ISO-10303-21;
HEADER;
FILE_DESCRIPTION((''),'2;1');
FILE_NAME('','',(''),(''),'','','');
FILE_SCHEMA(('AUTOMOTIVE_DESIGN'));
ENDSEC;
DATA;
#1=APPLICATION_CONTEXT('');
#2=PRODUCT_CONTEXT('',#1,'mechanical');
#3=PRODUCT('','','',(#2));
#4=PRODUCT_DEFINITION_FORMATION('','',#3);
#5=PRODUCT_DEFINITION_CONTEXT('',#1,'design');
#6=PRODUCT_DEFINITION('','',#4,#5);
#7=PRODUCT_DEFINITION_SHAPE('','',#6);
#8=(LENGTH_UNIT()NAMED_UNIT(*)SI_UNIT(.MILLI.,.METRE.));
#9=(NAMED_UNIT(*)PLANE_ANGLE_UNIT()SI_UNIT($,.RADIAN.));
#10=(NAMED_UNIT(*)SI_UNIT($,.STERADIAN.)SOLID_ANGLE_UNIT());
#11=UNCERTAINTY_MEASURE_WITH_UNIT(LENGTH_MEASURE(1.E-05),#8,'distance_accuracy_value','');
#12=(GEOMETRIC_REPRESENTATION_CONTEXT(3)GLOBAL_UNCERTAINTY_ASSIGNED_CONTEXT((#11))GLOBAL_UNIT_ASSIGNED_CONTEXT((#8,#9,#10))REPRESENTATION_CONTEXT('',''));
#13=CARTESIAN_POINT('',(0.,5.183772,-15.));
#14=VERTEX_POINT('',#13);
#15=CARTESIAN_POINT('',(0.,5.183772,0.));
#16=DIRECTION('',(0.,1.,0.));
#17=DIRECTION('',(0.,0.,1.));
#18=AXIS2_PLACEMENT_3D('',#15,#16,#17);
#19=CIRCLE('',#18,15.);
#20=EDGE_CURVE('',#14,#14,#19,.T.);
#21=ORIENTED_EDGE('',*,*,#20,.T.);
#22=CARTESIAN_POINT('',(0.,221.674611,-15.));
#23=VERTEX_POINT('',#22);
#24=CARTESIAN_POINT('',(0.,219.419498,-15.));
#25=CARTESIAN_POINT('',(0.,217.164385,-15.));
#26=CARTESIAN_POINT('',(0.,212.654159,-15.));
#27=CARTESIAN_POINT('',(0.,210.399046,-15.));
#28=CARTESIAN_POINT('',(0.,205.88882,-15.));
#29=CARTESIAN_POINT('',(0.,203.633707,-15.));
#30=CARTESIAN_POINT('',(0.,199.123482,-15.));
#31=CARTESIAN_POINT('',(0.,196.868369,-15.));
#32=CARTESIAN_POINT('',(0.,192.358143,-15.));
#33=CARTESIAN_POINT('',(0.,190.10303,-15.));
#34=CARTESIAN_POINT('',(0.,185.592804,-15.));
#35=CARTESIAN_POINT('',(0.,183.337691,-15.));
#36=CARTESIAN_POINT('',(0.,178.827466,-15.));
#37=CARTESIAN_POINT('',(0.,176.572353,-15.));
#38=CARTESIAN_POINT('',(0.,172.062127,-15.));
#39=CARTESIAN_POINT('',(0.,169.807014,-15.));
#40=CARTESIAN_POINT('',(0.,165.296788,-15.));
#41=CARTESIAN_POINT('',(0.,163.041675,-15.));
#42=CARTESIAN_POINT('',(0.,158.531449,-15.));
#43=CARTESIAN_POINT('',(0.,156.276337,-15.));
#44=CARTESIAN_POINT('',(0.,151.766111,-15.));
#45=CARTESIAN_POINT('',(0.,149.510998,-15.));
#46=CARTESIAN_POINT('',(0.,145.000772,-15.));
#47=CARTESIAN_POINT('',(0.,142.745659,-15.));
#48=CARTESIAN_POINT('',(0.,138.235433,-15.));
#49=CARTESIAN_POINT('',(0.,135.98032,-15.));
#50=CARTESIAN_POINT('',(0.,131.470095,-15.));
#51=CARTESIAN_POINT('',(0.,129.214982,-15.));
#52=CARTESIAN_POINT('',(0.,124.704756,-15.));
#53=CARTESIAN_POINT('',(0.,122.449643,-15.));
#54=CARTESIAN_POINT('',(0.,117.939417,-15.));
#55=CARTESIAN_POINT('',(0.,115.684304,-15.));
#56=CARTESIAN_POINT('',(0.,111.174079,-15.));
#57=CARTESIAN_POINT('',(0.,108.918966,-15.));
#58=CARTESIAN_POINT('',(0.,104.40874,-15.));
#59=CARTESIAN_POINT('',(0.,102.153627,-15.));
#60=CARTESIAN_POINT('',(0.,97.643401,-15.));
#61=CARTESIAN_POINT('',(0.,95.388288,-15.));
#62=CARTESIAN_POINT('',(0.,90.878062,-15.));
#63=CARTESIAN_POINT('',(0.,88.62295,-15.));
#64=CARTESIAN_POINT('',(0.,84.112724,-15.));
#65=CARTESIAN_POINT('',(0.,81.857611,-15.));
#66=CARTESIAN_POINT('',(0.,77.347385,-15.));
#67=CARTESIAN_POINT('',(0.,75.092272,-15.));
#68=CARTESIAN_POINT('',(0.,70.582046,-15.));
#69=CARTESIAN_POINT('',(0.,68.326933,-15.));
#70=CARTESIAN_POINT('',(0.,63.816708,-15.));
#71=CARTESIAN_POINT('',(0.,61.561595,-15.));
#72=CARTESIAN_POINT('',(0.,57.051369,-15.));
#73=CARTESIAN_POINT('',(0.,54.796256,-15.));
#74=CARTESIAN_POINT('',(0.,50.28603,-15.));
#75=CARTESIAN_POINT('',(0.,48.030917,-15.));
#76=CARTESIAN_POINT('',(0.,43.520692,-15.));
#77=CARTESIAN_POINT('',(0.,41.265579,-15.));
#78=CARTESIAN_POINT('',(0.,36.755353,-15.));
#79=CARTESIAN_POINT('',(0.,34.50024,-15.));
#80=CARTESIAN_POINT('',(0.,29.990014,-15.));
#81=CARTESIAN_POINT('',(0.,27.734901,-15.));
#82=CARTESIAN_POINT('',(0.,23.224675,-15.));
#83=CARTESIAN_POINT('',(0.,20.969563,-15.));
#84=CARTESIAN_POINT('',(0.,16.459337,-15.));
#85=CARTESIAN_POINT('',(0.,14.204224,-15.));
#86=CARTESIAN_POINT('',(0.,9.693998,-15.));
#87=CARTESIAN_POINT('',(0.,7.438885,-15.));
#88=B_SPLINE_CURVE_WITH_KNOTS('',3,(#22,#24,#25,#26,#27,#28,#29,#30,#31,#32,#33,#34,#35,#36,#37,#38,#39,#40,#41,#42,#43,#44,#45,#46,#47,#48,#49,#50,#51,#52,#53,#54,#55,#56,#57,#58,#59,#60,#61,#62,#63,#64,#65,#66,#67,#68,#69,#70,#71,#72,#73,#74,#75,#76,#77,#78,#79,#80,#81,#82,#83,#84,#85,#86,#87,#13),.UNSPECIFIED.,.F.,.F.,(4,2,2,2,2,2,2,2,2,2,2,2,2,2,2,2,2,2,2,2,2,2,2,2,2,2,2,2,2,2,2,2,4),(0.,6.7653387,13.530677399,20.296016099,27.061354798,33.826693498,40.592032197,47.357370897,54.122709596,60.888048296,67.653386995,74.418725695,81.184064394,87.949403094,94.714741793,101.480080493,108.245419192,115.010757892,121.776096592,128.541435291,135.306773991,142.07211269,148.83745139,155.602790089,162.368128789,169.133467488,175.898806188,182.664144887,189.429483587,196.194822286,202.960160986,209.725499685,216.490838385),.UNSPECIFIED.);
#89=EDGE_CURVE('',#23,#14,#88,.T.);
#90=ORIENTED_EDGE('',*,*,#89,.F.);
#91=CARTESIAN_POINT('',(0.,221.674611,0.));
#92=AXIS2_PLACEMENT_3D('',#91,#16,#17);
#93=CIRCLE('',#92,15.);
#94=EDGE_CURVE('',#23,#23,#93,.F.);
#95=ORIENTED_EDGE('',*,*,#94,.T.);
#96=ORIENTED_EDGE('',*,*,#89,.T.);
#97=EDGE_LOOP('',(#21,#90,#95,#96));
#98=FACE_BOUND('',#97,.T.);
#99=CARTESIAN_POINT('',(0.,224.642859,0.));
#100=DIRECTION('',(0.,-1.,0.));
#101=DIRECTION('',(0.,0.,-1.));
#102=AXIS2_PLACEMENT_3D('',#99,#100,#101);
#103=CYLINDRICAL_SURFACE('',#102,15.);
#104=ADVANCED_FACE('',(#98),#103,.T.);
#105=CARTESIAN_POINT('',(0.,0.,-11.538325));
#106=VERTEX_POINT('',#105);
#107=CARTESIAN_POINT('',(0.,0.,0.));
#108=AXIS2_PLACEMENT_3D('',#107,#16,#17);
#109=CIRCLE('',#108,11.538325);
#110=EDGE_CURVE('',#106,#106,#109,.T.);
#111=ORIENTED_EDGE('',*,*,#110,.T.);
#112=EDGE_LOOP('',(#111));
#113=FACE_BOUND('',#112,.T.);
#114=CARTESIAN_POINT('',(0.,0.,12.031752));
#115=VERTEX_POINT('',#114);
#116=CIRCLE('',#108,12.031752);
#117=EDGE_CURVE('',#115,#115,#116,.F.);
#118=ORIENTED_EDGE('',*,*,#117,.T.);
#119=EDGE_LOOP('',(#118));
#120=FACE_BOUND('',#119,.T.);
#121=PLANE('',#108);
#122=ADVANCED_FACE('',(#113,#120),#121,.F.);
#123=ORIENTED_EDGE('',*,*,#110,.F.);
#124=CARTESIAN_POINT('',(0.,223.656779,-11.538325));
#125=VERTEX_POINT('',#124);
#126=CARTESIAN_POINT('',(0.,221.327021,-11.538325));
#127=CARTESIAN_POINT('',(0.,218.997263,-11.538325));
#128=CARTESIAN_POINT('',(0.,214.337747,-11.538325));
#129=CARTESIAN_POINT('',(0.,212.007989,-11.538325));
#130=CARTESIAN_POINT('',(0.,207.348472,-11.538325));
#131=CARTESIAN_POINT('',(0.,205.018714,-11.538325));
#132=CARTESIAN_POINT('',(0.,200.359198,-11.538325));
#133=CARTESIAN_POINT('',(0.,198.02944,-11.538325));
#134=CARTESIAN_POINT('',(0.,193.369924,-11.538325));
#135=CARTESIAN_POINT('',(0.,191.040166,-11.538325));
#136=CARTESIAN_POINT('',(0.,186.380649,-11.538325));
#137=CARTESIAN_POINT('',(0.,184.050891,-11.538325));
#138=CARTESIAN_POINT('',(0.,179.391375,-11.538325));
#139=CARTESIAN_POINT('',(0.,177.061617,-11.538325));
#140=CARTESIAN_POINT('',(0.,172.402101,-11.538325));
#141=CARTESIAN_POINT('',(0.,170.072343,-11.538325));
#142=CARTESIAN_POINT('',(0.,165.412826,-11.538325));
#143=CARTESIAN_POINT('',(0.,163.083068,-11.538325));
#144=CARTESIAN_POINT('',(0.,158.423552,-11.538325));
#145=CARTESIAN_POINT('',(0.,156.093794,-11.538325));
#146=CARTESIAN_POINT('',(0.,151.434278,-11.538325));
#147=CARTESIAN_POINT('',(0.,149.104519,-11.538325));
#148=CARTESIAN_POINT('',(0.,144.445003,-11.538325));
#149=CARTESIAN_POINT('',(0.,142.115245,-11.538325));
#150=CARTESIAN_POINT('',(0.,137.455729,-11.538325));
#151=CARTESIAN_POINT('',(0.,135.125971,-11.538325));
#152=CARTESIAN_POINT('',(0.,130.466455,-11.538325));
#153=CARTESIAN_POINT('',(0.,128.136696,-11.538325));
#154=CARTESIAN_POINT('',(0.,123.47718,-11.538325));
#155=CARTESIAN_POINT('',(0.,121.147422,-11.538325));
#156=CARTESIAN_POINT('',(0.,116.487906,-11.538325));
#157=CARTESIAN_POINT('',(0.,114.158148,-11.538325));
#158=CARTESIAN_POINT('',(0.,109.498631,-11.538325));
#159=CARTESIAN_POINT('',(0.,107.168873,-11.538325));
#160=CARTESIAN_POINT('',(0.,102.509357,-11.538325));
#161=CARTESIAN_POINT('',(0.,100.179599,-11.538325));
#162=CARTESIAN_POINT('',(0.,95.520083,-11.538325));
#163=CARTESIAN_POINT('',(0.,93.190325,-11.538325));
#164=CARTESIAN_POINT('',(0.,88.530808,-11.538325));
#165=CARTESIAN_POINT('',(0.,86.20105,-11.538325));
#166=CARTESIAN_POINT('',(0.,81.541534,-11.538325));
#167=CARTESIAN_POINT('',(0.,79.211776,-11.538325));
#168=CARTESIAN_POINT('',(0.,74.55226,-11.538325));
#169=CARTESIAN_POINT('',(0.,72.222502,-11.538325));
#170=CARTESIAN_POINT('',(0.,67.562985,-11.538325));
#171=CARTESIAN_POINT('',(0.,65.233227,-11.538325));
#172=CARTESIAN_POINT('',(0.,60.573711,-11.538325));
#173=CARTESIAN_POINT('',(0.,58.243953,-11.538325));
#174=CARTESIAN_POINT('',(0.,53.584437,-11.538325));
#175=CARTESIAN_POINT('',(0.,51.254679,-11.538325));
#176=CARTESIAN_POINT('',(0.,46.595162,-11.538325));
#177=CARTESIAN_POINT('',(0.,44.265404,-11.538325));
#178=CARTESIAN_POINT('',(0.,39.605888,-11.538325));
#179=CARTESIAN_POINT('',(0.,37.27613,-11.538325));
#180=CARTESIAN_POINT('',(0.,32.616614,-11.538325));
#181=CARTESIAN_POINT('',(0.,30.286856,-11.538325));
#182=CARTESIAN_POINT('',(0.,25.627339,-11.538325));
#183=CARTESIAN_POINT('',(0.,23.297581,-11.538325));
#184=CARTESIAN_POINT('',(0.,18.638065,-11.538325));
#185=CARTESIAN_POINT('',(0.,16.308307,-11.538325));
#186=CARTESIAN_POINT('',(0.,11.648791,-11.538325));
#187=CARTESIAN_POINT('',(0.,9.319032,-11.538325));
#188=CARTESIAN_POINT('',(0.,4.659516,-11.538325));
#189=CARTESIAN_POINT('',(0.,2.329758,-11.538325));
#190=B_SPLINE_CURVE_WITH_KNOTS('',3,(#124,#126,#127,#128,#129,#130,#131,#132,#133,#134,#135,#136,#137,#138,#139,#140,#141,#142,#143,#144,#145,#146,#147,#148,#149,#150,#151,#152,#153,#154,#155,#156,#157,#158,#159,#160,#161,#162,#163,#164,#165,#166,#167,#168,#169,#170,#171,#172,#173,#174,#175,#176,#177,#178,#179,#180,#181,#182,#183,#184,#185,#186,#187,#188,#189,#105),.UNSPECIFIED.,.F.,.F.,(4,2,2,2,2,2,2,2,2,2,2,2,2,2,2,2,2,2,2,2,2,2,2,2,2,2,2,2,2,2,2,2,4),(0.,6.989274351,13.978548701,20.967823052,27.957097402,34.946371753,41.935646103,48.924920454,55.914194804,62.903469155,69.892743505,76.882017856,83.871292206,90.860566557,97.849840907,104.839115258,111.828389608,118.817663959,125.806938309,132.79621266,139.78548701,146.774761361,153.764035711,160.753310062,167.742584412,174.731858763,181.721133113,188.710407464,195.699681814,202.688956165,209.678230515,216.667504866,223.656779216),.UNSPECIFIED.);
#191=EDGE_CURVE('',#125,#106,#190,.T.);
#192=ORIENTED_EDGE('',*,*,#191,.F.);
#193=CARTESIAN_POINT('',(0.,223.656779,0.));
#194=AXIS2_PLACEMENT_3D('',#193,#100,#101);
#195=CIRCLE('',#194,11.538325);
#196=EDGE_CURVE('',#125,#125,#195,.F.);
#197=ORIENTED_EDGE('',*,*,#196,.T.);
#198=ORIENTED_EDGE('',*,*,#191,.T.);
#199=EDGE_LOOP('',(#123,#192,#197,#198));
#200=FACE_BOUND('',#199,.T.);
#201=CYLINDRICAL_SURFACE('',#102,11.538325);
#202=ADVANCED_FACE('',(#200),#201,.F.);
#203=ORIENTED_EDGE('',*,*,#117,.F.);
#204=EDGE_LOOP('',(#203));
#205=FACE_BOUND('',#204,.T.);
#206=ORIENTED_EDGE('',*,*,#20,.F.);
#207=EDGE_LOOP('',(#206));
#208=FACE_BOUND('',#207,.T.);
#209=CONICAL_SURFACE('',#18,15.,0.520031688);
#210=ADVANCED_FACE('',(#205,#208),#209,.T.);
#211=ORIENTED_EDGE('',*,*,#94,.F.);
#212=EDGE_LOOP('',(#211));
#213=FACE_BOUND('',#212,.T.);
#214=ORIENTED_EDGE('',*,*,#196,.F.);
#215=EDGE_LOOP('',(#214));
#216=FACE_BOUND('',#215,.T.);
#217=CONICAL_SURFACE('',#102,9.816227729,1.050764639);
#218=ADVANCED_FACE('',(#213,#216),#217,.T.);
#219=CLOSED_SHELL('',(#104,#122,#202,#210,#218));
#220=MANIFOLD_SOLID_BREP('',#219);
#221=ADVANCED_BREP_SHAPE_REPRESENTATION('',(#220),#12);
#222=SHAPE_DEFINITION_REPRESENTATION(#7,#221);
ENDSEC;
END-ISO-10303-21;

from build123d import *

# Parameters (mm, degrees)
SKETCH1_R           = 15
BOSS_EXTRUDE1_DEPTH = 224.642859
SKETCH2_R           = 11.538325124
CUT_EXTRUDE1_DEPTH  = 226.642225879
CHAMFER1_SIZE       = 2.968248
CHAMFER1_SIZE_2     = 5.183772


with BuildPart() as part:
    # Sketch1 → Boss-Extrude1 (new body)
    with BuildSketch(Plane(origin=(0, 0, 0), x_dir=(1, 0, 0), z_dir=(0, 1, 0))):
        with Locations(Location((0, 0, 0), (0, 0, 90))):
            Circle(SKETCH1_R)
    extrude(amount=BOSS_EXTRUDE1_DEPTH)

    # Sketch2 → Cut-Extrude1 (cut, through all)
    with BuildSketch(Plane(origin=(0, 0, 0), x_dir=(1, 0, 0), z_dir=(0, 1, 0))):
        with Locations(Location((0, 0, 0), (0, 0, 90))):
            Circle(SKETCH2_R)
    extrude(amount=CUT_EXTRUDE1_DEPTH, mode=Mode.SUBTRACT)

    # Chamfer1
    # the kernel refuses this chamfer: 5.183772, 2.968248 mm, written as the material it takes off along each edge
    with BuildSketch(Plane(origin=(0, 224.642859, 0), x_dir=(0, 0, -1), z_dir=(1, 0, 0))) as chamfer1_piece_1:
        Polygon((15, -CHAMFER1_SIZE), (15 - CHAMFER1_SIZE_2, 0), (15, 0), align=None)
    revolve(axis=Axis((0, 224.642859, 0), (0, 1, 0)), mode=Mode.SUBTRACT)
    with BuildSketch(Plane(origin=(0, 0, 0), x_dir=(0, 0, -1), z_dir=(1, 0, 0))) as chamfer1_piece_2:
        Polygon((15, CHAMFER1_SIZE_2), (15 - CHAMFER1_SIZE, 0), (15, 0), align=None)
    revolve(axis=Axis((0, 0, 0), (0, 1, 0)), mode=Mode.SUBTRACT)


solid = part.part
